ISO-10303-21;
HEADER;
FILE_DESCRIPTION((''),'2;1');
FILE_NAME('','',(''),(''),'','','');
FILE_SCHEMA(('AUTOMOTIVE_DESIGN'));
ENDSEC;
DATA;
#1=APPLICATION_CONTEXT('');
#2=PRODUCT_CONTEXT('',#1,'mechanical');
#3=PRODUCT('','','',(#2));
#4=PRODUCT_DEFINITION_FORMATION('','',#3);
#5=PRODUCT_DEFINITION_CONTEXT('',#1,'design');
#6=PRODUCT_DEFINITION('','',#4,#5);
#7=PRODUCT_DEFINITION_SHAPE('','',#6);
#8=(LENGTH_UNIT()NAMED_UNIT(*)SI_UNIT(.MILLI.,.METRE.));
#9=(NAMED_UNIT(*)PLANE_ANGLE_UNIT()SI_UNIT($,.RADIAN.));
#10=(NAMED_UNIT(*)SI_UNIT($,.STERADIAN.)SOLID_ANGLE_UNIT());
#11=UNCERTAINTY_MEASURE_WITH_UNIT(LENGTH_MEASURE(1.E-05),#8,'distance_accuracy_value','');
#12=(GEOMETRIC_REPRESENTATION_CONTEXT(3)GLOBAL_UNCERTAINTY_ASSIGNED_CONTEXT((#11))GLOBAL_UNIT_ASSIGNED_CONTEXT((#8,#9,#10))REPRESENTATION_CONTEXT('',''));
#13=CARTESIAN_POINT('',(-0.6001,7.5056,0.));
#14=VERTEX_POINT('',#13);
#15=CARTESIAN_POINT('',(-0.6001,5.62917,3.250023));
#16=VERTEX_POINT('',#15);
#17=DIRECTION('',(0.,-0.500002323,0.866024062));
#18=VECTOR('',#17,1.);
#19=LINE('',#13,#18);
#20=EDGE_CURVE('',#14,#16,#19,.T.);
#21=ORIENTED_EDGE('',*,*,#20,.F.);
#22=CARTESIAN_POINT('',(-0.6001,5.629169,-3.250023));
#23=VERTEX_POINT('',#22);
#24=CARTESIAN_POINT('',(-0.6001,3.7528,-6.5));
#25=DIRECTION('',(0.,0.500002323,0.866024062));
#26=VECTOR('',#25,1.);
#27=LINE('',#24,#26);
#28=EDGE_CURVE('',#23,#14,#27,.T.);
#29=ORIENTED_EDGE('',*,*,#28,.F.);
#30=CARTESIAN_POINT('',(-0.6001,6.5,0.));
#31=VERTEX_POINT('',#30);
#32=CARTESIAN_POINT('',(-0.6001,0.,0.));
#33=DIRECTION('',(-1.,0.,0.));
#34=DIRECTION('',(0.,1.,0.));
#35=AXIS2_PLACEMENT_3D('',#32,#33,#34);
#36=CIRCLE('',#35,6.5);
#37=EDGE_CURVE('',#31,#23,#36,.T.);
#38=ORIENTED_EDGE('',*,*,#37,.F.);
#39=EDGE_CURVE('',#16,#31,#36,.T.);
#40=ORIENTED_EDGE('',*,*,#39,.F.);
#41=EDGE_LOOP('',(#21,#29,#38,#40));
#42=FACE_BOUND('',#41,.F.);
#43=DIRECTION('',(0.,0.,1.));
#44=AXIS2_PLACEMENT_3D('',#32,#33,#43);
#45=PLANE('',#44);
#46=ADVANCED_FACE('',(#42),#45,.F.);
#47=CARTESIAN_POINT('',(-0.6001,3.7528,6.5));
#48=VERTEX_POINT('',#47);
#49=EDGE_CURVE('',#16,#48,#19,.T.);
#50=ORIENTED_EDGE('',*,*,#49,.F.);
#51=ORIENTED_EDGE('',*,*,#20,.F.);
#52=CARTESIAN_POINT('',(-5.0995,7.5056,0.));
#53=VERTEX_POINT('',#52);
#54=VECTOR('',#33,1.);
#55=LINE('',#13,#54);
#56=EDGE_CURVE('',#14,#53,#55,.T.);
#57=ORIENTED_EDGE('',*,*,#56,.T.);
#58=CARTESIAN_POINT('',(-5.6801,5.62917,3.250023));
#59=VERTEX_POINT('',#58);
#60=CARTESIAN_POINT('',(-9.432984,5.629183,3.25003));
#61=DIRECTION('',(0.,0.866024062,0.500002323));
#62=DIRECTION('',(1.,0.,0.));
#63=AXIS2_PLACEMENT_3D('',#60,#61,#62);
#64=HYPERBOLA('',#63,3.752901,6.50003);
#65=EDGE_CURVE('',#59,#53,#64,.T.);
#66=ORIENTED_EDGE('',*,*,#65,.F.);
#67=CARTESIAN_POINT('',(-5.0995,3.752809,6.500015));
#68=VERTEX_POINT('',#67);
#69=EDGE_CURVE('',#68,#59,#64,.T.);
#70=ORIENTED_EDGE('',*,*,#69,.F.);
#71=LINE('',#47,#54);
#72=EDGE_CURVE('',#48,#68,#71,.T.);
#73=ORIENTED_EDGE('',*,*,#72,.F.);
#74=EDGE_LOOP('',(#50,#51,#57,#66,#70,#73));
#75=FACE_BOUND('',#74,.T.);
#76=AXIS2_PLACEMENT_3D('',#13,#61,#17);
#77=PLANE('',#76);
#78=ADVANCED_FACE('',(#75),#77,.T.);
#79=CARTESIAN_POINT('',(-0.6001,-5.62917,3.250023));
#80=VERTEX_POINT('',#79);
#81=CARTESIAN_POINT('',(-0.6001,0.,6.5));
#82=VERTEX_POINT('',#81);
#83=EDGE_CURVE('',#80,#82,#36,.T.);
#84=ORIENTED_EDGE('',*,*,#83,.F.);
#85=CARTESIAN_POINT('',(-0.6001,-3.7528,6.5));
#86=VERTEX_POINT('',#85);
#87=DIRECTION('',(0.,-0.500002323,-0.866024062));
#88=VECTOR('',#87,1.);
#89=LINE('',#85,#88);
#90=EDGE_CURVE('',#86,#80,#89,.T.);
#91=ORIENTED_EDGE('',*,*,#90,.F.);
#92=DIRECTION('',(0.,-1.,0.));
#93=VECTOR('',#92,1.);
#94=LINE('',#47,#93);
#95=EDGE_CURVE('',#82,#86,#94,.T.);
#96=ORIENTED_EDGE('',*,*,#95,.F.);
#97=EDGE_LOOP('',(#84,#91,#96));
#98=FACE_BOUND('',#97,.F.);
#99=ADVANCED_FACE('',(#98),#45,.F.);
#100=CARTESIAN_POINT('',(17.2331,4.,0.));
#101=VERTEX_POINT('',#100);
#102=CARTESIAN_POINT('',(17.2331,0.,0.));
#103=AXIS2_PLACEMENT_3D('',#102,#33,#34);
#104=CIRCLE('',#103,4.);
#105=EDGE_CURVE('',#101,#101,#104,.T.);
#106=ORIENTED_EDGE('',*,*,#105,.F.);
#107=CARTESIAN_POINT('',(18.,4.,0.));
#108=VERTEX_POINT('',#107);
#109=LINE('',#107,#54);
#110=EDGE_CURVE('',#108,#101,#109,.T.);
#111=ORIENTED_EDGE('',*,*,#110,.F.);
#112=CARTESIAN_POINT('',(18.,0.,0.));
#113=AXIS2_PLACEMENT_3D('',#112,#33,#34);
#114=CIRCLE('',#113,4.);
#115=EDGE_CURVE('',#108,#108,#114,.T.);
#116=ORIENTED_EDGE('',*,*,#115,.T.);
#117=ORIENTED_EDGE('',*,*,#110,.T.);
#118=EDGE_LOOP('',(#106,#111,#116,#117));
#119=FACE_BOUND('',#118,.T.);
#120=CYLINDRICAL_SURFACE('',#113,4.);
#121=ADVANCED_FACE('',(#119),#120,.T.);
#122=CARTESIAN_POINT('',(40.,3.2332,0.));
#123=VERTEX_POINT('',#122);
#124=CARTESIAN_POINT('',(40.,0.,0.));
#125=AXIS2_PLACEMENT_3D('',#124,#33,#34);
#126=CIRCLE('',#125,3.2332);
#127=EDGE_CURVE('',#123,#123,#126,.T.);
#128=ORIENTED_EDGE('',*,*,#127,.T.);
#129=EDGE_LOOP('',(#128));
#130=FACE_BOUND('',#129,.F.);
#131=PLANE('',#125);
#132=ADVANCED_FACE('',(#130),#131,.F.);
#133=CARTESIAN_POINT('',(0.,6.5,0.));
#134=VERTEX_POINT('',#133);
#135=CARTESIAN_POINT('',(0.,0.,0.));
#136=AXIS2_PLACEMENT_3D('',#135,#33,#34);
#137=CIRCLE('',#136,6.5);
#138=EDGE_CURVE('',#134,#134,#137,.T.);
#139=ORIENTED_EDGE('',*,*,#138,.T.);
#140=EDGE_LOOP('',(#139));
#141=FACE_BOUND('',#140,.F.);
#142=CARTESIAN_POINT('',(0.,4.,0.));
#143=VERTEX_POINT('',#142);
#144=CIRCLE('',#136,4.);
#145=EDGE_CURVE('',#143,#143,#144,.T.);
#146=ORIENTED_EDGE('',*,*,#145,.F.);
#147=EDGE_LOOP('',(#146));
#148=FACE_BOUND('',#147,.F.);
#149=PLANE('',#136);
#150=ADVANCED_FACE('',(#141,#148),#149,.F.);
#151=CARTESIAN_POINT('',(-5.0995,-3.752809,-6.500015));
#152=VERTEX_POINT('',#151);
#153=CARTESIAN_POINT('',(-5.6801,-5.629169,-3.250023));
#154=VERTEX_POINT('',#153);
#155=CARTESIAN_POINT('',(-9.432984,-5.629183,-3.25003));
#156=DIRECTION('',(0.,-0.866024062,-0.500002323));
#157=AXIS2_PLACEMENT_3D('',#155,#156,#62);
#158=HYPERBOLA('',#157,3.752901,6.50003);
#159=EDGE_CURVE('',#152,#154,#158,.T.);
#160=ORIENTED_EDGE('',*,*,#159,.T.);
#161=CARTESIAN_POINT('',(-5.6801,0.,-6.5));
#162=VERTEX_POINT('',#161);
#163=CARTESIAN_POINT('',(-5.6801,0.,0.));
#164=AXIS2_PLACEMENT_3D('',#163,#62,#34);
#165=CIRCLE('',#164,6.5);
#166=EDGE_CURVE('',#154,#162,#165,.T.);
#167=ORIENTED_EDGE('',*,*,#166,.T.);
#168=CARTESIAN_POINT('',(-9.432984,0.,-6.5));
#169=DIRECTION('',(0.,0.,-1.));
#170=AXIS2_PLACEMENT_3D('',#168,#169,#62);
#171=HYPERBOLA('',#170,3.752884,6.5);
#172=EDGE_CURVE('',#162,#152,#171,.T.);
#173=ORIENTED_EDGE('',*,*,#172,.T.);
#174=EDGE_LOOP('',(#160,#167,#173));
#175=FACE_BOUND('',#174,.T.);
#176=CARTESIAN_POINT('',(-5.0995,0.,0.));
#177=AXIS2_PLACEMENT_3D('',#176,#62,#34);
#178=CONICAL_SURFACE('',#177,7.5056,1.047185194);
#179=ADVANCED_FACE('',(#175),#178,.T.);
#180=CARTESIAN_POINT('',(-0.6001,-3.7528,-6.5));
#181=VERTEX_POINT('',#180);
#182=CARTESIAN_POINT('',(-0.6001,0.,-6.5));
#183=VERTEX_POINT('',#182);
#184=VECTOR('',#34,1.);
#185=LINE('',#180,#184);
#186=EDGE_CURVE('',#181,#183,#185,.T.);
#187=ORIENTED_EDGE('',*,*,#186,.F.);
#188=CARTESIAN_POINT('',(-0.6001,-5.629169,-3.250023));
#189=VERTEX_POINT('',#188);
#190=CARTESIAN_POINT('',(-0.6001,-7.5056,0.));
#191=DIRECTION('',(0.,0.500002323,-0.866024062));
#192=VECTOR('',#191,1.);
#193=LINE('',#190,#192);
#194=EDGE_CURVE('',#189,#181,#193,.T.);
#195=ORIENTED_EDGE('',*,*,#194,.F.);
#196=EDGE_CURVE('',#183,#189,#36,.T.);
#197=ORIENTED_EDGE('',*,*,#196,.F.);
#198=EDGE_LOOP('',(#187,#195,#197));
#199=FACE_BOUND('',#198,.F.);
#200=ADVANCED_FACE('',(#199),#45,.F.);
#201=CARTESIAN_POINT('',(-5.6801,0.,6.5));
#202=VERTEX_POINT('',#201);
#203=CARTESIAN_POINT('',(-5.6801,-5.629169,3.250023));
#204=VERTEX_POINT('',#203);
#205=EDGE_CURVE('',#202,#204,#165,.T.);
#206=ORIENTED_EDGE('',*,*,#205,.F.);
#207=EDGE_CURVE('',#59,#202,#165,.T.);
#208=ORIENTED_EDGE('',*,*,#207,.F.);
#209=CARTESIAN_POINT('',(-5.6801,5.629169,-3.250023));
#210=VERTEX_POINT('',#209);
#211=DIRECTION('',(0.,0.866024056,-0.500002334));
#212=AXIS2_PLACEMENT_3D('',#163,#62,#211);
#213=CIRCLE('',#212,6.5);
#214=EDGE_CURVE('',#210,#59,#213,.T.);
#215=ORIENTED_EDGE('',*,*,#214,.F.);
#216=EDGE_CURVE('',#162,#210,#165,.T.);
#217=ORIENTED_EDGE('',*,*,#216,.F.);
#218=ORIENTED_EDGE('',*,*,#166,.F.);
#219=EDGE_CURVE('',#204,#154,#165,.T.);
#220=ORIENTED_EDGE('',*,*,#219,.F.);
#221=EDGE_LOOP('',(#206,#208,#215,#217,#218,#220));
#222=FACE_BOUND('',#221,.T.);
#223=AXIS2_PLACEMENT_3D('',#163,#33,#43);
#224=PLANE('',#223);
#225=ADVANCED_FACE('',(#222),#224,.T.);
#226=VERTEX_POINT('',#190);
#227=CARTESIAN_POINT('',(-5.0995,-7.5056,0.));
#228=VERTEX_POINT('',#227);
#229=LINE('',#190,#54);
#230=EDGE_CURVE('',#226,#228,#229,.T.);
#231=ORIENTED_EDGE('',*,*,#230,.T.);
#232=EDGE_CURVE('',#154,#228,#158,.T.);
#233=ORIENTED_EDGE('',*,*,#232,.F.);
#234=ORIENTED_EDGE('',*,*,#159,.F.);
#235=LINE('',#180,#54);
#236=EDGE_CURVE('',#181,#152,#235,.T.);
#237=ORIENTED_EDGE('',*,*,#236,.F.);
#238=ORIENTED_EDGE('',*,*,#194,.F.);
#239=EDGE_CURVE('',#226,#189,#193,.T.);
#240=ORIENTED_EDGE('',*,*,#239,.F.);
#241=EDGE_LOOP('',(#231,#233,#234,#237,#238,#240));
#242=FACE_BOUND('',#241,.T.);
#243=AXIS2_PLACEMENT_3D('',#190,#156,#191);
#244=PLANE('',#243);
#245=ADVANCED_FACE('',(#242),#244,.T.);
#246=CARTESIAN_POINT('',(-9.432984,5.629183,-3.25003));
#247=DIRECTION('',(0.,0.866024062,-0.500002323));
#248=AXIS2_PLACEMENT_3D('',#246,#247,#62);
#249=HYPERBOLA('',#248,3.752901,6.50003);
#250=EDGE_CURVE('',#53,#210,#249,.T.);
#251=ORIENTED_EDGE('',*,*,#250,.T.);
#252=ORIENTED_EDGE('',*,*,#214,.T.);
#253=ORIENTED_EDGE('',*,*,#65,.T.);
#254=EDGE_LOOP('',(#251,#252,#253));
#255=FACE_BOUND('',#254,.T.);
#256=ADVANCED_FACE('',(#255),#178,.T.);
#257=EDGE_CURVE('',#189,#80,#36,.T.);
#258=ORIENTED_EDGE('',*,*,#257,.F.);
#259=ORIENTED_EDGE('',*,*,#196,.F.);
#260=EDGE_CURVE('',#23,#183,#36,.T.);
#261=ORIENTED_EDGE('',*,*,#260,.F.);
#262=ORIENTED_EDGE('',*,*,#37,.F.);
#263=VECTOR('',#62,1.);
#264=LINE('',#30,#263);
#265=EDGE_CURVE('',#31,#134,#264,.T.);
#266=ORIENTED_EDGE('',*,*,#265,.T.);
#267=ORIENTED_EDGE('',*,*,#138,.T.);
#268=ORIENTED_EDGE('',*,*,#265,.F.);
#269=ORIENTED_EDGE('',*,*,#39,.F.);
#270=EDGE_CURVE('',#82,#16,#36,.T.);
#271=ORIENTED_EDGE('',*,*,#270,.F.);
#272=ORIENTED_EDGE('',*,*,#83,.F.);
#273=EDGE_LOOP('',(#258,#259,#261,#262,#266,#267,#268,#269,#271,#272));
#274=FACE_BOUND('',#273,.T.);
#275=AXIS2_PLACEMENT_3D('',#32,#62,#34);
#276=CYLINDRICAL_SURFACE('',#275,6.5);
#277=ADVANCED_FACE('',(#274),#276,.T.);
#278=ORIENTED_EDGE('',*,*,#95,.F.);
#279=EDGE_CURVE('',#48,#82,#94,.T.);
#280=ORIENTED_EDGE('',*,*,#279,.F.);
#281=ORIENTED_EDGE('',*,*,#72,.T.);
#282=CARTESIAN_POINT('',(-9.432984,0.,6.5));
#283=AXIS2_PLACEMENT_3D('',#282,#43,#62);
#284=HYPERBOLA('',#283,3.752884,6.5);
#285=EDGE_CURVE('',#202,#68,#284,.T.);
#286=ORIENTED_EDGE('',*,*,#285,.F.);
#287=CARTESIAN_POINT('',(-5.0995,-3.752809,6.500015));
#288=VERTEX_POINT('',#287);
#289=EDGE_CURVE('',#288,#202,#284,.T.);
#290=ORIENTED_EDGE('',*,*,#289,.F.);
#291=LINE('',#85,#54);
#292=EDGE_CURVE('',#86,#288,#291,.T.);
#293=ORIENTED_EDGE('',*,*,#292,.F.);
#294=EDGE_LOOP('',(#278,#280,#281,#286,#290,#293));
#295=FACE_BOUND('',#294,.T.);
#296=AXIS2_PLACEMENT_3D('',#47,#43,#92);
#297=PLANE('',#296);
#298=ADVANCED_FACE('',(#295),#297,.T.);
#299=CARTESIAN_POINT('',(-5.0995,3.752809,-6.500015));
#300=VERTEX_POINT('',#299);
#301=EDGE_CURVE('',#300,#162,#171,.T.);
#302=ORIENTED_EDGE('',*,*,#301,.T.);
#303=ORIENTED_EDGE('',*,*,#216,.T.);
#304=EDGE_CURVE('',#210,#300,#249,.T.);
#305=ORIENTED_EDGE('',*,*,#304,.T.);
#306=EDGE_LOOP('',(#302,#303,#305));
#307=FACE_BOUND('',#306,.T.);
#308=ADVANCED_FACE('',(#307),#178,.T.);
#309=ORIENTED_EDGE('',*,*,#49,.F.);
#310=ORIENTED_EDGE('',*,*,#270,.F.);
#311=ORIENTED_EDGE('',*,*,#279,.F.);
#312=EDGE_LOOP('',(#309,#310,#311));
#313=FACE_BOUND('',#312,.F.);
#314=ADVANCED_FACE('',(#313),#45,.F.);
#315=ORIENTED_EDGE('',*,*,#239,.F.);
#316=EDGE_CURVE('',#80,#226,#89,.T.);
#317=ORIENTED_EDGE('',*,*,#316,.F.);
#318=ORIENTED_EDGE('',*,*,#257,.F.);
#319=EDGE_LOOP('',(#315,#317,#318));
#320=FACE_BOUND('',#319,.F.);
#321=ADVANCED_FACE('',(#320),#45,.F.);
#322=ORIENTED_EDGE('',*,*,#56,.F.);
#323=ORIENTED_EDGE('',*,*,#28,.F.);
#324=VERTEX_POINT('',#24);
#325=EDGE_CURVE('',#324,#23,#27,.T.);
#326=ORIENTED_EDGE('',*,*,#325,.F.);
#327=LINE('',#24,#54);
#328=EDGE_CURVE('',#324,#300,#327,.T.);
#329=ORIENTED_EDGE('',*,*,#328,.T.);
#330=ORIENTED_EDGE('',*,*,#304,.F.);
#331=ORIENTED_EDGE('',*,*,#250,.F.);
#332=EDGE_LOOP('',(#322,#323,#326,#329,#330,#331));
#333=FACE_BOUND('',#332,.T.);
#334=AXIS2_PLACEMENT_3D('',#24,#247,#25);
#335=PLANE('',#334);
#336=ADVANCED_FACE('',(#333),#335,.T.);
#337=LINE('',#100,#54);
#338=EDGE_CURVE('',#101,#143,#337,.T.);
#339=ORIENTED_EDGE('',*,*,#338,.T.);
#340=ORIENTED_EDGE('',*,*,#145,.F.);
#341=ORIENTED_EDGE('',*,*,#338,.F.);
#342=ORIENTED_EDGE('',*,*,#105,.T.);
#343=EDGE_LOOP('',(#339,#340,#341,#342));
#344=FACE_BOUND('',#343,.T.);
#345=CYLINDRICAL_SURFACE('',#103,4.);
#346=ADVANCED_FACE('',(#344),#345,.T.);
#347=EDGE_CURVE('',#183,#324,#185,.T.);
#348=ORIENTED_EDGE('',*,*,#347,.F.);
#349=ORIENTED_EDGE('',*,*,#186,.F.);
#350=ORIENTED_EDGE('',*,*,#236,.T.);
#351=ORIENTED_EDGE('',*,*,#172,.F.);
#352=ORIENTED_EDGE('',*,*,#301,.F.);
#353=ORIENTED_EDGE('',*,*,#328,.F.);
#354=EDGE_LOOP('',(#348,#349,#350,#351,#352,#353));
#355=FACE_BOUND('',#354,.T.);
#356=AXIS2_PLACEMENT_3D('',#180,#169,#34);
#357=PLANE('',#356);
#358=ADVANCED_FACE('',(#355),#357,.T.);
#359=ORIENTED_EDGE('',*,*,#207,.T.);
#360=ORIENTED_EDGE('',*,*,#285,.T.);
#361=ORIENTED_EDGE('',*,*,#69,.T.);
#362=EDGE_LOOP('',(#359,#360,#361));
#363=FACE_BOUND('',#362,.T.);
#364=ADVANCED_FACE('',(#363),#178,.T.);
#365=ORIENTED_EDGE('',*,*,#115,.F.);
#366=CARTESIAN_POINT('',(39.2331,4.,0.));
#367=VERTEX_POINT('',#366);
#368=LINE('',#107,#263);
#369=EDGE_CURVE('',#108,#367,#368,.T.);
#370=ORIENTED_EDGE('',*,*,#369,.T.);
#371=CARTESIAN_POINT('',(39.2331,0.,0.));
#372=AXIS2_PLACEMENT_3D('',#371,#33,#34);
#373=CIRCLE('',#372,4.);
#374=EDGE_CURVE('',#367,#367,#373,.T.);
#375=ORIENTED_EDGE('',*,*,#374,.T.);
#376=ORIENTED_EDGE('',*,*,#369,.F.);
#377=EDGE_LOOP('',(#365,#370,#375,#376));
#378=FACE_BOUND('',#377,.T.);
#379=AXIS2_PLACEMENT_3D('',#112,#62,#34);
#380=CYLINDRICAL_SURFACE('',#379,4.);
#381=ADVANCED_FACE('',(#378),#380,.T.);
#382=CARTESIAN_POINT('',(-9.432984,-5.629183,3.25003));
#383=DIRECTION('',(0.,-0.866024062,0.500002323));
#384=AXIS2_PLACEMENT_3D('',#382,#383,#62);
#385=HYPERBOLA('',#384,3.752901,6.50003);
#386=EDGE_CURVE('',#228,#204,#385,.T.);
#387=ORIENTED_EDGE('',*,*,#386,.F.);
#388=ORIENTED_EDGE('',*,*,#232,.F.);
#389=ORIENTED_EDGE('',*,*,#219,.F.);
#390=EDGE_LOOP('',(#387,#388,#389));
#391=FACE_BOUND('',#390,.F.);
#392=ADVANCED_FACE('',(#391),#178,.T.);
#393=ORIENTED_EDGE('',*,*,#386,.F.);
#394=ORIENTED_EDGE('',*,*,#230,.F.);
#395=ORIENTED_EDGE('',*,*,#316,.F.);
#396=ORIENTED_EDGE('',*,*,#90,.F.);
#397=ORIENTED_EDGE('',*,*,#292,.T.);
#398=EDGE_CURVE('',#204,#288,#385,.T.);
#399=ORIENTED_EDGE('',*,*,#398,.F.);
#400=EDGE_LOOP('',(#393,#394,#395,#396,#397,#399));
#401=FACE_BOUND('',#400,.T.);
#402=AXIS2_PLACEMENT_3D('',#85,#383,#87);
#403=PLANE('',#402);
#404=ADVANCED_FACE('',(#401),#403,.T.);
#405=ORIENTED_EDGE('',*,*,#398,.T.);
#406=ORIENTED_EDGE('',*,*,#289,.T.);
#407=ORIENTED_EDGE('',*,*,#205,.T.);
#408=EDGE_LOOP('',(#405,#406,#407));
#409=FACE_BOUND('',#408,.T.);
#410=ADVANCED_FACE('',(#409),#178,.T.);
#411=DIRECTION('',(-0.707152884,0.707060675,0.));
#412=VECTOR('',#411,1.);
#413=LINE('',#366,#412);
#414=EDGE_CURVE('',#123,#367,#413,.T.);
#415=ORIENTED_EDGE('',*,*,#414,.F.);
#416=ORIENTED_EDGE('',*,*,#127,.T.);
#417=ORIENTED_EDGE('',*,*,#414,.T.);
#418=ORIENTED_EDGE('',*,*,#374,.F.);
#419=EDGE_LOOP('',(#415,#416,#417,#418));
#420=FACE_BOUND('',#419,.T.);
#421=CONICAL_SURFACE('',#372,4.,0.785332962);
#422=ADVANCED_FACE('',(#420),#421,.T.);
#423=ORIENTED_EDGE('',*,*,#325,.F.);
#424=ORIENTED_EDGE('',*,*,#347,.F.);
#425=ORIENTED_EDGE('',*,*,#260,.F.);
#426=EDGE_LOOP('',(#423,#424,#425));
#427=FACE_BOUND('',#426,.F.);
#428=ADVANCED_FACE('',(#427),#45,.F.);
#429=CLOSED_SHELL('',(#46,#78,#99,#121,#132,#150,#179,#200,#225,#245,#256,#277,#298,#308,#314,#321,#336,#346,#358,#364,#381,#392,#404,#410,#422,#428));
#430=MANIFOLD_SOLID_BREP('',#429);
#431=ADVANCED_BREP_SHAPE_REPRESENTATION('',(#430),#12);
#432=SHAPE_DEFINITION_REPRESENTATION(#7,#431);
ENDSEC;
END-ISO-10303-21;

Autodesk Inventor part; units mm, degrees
ref_plane "YZ Plane" through (0, 0, 0) normal (1, 0, 0) x (0, 1, 0)
ref_plane "XZ Plane" through (0, 0, 0) normal (0, 1, 0) x (-1, 0, 0)
sketch "Sketch1" plane through (0, 0, 0) normal (0, 0, 1) x (1, 0, 0)
  line L0 (0, 6.5) -> (0, 4)
  line L1 (18, 4) -> (40, 4)
  line L2 (40, 4) -> (40, 0)
  line L3 (40, 0) -> (-0.6001, 0)
  line L4 (-8.7201, 0) -> (48.12, 0) projected
  line L5 (-0.6001, 0) -> (-0.6001, 6.5)
  line L6 (-0.6001, 6.5) -> (0, 6.5)
  line L7 (18, 4) -> (17.2331, 4)
  line L8 (17.2331, 4) -> (0, 4)
  line L9 (0, -1.3) -> (0, 7.8) projected
  dimension "d0" = 40
  dimension "d1" = 22
  dimension "d2" = 8
  dimension "d9" = 0.6001
  dimension "d10" = 13
  dimension "d13" = 0.7669
  dimension "d14" = 8
revolve "Body" add sketch "Sketch1" angle 360 about axis through (40, 0, 0) along (-1, 0, 0)
sketch "Sketch2" plane through (-0.6001, 0, 0) normal (-1, 0, 0) x (0, 0, 1)
  line L0 (0, 7.5056) -> (6.5, 3.7528)
  line L1 (6.5, 3.7528) -> (6.5, -3.7528)
  line L2 (6.5, -3.7528) -> (0, -7.5056)
  line L3 (0, -7.5056) -> (-6.5, -3.7528)
  line L4 (-6.5, -3.7528) -> (-6.5, 3.7528)
  line L5 (-6.5, 3.7528) -> (0, 7.5056)
  point P0 (0, 0)
  point P1 (0, 0)
  dimension "d11" = 13
extrude "Head" add sketch "Sketch2" along normal blind 5.08
sketch "Sketch4" plane through (0, 0, 0) normal (0, 0, 1) x (1, 0, 0)
  line L0 (-5.6801, 6.5) -> (-5.6801, 7.5056)
  line L1 (-5.6801, 7.5056) -> (-5.0995, 7.5056)
  line L2 (-5.0995, 7.5056) -> (-5.6801, 6.5)
  line L3 (-6.6961, 0) -> (0.4159, 0) projected
  line L4 (-0.6001, 7.5056) -> (-5.6801, 7.5056) projected
  line L5 (-5.6801, 3.7528) -> (-5.6801, 7.5056) projected
  dimension "d5" = 30
  dimension "d19" = 13
revolve "Chamfer1" cut sketch "Sketch4" angle 360 about axis through (-10, 0, 0) along (1, 0, 0)
thread "Thread" size "M8x1.25" class "6g" standard "ISO Metric profile" length 22
chamfer "Chamfer2" distance 0.7668 distance2 0.7669 1 edges at (40, -4, 0) measured on face at (40, 0.4453, 1.0204)
ref_plane "Work Plane1" through (1.525, 0, 0) normal (0, 0, 1) x (1, 0, 0)
equation "\"d0\" = NLG"
equation "\"d1\" = GEL"
equation "\"d2\" = GD"
equation "\"d10\" = SD2"
equation "\"d14\" = BDM"
equation "\"d11\" = SW"
equation "\"d3\" = KOH - SD"
equation "\"d5\" = ANG1"
equation "\"d19\" = SW0"
equation "\"d15\" = GEL"
equation "\"d6\" = -0.5 * SPD + 0.5 * GD"
equation "\"NLG\" = 40"
equation "\"GD\" = NND"
equation "\"BDM\" = NND"
equation "\"KOH\" = 5.68"
equation "\"GEL\" = 22"
equation "\"SW\" = 13"
equation "\"SW0\" = SW"
equation "\"SPD\" = NND - 1.2269 * PTC"
equation "\"SD2\" = SW"
equation "\"SD\" = 0.6"
equation "\"ANG1\" = 30deg"
equation "\"GAL\" = 0.61345 * PTC"
equation "\"GUL\" = 0.61345 * PTC"
equation "\"RR\" = 0.4"
equation "\"WFT\" = SD"
equation "\"GD1\" = THREADDIA - 1.2269 * PTC"
equation "\"THREADDIA\" = 8"
equation "\"SDH\" = SW"
equation "\"TOA\" = 30deg"
equation "\"FAWI\" = 45deg"
equation "\"PTC\" = 1.25"
equation "\"NND\" = 8"
equation "\"E0\" = 1.155 * SW"
properties part number "AS 1111 - M8 x 40" material "Steel, Mild"
